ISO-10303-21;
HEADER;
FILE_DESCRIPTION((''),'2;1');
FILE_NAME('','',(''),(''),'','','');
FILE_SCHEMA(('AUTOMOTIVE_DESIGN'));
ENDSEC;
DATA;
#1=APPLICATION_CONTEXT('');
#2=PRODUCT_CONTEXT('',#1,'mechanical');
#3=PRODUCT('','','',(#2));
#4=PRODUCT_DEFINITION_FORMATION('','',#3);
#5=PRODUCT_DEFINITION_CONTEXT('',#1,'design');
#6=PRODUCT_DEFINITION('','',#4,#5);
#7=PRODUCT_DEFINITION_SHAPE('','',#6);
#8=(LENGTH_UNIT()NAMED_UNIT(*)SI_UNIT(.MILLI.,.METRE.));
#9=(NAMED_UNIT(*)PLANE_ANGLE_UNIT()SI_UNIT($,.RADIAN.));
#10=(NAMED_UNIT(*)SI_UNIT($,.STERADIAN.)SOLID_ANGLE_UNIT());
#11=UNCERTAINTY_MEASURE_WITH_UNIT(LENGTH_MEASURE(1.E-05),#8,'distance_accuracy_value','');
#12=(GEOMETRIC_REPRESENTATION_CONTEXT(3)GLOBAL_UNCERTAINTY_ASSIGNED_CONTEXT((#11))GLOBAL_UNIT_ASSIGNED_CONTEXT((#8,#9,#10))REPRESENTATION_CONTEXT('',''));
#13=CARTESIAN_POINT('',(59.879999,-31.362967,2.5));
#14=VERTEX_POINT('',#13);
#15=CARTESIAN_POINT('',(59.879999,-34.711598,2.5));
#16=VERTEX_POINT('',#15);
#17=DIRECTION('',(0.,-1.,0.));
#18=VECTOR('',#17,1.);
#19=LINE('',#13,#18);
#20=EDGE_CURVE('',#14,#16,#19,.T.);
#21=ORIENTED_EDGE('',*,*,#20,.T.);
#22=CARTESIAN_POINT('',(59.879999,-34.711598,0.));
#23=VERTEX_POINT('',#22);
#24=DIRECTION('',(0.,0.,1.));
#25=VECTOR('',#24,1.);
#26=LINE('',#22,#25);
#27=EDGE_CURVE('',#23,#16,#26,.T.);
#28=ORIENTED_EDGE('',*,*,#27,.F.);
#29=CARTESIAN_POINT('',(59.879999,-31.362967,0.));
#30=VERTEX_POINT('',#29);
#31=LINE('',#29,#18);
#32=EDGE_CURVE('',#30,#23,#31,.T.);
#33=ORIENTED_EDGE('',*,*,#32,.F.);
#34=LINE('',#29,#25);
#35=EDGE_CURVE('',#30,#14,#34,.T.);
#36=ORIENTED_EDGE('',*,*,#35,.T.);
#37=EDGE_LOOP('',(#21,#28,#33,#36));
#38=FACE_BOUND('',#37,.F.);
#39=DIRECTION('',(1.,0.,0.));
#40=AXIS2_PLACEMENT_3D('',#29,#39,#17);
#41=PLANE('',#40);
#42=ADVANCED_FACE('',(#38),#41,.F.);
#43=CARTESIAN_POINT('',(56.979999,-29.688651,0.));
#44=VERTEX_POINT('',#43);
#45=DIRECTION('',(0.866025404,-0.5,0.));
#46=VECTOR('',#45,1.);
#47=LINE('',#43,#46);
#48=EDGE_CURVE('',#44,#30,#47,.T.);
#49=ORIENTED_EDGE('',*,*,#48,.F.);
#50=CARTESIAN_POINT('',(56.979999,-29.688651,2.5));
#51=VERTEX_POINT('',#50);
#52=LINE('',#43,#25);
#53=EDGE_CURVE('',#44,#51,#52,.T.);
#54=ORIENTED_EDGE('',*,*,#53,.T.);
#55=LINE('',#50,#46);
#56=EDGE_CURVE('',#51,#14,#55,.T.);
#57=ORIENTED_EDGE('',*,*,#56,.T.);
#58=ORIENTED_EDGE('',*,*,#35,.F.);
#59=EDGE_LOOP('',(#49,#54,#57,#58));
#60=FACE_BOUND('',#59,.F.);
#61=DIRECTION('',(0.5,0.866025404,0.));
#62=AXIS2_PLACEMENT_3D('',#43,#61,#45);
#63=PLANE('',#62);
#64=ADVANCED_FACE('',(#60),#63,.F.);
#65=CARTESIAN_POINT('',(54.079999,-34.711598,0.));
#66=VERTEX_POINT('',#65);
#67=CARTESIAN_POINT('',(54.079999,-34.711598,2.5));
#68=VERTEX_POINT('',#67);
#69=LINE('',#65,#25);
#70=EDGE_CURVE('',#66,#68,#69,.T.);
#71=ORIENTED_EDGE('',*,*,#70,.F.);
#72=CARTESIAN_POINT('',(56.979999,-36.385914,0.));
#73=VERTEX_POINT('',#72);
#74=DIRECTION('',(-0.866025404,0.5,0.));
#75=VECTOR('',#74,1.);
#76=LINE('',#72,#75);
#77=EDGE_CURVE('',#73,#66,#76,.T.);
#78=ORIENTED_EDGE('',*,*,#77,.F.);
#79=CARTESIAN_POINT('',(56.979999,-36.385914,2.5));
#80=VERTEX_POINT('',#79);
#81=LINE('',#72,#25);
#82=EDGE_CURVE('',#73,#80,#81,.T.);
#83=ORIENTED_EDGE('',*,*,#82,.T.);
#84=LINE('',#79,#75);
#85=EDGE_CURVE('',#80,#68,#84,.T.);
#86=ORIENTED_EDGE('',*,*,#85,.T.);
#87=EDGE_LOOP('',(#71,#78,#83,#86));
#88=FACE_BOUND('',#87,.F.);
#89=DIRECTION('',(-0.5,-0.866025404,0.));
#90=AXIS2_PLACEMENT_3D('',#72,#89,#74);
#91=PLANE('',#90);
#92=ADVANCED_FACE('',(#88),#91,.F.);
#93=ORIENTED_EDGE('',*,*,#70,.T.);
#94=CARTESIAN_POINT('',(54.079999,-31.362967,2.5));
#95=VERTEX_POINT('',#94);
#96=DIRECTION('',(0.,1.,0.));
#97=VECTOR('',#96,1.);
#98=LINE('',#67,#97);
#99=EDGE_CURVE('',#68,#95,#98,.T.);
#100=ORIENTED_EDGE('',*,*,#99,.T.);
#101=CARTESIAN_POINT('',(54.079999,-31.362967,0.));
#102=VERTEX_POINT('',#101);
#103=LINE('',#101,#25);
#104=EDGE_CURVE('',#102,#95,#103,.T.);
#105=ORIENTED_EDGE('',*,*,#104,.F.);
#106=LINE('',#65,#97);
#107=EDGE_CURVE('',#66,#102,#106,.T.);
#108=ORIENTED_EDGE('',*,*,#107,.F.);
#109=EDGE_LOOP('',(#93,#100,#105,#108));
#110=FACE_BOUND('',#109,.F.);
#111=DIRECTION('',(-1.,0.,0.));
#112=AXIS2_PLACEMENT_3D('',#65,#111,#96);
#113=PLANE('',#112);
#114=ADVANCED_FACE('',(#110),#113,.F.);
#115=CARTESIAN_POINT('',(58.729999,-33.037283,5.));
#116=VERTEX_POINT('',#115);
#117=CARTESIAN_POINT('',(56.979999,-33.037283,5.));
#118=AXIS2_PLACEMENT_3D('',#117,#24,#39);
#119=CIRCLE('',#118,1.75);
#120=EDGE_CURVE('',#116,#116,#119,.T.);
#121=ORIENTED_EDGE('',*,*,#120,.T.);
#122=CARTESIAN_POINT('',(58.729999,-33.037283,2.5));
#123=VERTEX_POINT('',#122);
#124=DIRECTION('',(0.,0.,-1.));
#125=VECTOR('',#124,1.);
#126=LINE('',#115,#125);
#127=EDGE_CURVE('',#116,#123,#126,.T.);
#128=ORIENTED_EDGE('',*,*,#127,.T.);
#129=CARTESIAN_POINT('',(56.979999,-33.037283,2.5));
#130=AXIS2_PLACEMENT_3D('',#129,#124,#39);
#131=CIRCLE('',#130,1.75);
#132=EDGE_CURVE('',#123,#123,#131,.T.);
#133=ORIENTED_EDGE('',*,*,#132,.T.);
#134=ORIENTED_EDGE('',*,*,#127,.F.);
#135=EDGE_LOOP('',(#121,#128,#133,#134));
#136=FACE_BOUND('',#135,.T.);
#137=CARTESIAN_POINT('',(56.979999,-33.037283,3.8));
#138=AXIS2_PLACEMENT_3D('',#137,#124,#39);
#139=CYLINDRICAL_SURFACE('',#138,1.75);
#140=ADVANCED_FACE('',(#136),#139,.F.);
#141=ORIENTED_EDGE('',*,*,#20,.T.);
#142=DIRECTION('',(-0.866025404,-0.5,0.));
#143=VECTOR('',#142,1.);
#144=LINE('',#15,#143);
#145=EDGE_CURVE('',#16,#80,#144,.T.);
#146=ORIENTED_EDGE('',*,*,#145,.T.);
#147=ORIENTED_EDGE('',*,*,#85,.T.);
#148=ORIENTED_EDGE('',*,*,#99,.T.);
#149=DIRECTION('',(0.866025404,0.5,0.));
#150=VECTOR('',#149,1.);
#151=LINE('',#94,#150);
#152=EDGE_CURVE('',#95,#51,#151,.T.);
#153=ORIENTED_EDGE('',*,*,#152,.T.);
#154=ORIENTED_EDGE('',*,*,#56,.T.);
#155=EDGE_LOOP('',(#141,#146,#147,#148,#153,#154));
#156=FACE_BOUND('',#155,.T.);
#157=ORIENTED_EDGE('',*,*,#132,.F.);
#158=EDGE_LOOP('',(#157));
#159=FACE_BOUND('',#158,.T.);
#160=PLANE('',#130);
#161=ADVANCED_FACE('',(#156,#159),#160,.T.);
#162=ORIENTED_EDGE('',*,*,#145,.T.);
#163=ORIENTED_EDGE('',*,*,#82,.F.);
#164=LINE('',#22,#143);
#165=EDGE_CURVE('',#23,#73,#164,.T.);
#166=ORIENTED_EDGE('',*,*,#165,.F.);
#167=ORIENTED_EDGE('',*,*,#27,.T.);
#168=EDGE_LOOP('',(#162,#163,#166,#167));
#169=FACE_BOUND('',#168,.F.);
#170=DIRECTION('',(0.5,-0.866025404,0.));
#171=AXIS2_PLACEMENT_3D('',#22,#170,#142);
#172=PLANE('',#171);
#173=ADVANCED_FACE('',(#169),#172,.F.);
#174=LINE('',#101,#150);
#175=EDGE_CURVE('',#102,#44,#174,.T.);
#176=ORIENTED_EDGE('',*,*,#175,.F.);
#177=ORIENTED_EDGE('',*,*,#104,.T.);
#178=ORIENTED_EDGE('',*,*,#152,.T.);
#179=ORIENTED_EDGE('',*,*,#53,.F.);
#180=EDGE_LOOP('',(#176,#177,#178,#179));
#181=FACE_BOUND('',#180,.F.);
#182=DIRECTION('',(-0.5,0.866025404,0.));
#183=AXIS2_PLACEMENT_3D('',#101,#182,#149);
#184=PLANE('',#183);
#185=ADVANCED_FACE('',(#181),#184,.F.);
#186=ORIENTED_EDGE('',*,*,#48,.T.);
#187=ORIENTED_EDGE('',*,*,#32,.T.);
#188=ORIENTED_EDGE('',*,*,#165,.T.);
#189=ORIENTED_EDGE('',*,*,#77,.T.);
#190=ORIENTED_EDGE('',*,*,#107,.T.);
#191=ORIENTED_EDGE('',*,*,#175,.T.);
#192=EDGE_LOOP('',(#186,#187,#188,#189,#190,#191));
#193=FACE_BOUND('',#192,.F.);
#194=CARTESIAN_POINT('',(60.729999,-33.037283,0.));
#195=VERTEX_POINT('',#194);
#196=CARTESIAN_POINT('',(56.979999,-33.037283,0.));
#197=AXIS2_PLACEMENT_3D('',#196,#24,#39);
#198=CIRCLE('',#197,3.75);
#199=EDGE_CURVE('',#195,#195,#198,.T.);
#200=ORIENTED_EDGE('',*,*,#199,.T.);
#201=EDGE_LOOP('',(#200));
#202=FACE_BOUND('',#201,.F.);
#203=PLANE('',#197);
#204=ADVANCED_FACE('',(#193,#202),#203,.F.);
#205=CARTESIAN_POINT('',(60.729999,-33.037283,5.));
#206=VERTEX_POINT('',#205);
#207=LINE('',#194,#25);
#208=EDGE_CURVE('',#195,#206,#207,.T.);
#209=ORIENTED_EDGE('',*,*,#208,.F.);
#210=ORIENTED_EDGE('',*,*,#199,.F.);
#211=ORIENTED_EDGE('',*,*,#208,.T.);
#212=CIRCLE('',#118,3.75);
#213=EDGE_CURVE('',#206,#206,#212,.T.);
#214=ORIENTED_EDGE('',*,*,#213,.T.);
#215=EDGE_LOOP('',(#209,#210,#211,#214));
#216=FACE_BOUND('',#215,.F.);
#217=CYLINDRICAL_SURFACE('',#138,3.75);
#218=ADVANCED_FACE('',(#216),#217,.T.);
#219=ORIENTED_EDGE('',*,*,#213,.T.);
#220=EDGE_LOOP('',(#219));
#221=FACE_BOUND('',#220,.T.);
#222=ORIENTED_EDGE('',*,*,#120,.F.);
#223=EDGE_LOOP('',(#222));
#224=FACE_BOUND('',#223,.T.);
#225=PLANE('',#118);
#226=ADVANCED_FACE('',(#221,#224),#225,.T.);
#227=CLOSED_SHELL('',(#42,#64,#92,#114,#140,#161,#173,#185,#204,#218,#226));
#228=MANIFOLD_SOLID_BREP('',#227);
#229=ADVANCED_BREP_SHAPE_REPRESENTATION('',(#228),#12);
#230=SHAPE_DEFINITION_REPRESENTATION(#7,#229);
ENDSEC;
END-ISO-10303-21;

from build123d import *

# Parameters (mm, degrees)
F0_R     = 3.75
F0_R_2   = 1.75
F1_DEPTH = 3.8
F3_DEPTH = 2.5
F4_DEPTH = 1.2


with BuildPart() as f1:
    # F0 (on Top) → F1 (new body)
    with BuildSketch(Plane.XY):
        with Locations((56.9799989462, -33.0372825265)):
            Circle(F0_R)
        with Locations((56.9799989462, -33.0372825265)):
            Circle(F0_R_2, mode=Mode.SUBTRACT)
    extrude(amount=F1_DEPTH)

    # F2 (on face) → F3 (cut)
    with BuildSketch(Plane(origin=(0, 0, 0), x_dir=(1, 0, 0), z_dir=(0, 0, -1))):
        Polygon((59.8799989462, 31.3629667458), (59.8799989462, 34.7115983071), (56.9799989462, 36.3859140878), (54.0799989462, 34.7115983071), (54.0799989462, 31.3629667458), (56.9799989462, 29.6886509652), align=None)
    extrude(amount=-F3_DEPTH, mode=Mode.SUBTRACT)

    # F4 (add): a face of the model
    f4_faces = [f1.faces().sort_by_distance(p)[0] for p in [
        (53.3360649634, -33.0372825265, 3.8),
    ]]
    extrude(f4_faces, amount=F4_DEPTH)


solid = f1.part
